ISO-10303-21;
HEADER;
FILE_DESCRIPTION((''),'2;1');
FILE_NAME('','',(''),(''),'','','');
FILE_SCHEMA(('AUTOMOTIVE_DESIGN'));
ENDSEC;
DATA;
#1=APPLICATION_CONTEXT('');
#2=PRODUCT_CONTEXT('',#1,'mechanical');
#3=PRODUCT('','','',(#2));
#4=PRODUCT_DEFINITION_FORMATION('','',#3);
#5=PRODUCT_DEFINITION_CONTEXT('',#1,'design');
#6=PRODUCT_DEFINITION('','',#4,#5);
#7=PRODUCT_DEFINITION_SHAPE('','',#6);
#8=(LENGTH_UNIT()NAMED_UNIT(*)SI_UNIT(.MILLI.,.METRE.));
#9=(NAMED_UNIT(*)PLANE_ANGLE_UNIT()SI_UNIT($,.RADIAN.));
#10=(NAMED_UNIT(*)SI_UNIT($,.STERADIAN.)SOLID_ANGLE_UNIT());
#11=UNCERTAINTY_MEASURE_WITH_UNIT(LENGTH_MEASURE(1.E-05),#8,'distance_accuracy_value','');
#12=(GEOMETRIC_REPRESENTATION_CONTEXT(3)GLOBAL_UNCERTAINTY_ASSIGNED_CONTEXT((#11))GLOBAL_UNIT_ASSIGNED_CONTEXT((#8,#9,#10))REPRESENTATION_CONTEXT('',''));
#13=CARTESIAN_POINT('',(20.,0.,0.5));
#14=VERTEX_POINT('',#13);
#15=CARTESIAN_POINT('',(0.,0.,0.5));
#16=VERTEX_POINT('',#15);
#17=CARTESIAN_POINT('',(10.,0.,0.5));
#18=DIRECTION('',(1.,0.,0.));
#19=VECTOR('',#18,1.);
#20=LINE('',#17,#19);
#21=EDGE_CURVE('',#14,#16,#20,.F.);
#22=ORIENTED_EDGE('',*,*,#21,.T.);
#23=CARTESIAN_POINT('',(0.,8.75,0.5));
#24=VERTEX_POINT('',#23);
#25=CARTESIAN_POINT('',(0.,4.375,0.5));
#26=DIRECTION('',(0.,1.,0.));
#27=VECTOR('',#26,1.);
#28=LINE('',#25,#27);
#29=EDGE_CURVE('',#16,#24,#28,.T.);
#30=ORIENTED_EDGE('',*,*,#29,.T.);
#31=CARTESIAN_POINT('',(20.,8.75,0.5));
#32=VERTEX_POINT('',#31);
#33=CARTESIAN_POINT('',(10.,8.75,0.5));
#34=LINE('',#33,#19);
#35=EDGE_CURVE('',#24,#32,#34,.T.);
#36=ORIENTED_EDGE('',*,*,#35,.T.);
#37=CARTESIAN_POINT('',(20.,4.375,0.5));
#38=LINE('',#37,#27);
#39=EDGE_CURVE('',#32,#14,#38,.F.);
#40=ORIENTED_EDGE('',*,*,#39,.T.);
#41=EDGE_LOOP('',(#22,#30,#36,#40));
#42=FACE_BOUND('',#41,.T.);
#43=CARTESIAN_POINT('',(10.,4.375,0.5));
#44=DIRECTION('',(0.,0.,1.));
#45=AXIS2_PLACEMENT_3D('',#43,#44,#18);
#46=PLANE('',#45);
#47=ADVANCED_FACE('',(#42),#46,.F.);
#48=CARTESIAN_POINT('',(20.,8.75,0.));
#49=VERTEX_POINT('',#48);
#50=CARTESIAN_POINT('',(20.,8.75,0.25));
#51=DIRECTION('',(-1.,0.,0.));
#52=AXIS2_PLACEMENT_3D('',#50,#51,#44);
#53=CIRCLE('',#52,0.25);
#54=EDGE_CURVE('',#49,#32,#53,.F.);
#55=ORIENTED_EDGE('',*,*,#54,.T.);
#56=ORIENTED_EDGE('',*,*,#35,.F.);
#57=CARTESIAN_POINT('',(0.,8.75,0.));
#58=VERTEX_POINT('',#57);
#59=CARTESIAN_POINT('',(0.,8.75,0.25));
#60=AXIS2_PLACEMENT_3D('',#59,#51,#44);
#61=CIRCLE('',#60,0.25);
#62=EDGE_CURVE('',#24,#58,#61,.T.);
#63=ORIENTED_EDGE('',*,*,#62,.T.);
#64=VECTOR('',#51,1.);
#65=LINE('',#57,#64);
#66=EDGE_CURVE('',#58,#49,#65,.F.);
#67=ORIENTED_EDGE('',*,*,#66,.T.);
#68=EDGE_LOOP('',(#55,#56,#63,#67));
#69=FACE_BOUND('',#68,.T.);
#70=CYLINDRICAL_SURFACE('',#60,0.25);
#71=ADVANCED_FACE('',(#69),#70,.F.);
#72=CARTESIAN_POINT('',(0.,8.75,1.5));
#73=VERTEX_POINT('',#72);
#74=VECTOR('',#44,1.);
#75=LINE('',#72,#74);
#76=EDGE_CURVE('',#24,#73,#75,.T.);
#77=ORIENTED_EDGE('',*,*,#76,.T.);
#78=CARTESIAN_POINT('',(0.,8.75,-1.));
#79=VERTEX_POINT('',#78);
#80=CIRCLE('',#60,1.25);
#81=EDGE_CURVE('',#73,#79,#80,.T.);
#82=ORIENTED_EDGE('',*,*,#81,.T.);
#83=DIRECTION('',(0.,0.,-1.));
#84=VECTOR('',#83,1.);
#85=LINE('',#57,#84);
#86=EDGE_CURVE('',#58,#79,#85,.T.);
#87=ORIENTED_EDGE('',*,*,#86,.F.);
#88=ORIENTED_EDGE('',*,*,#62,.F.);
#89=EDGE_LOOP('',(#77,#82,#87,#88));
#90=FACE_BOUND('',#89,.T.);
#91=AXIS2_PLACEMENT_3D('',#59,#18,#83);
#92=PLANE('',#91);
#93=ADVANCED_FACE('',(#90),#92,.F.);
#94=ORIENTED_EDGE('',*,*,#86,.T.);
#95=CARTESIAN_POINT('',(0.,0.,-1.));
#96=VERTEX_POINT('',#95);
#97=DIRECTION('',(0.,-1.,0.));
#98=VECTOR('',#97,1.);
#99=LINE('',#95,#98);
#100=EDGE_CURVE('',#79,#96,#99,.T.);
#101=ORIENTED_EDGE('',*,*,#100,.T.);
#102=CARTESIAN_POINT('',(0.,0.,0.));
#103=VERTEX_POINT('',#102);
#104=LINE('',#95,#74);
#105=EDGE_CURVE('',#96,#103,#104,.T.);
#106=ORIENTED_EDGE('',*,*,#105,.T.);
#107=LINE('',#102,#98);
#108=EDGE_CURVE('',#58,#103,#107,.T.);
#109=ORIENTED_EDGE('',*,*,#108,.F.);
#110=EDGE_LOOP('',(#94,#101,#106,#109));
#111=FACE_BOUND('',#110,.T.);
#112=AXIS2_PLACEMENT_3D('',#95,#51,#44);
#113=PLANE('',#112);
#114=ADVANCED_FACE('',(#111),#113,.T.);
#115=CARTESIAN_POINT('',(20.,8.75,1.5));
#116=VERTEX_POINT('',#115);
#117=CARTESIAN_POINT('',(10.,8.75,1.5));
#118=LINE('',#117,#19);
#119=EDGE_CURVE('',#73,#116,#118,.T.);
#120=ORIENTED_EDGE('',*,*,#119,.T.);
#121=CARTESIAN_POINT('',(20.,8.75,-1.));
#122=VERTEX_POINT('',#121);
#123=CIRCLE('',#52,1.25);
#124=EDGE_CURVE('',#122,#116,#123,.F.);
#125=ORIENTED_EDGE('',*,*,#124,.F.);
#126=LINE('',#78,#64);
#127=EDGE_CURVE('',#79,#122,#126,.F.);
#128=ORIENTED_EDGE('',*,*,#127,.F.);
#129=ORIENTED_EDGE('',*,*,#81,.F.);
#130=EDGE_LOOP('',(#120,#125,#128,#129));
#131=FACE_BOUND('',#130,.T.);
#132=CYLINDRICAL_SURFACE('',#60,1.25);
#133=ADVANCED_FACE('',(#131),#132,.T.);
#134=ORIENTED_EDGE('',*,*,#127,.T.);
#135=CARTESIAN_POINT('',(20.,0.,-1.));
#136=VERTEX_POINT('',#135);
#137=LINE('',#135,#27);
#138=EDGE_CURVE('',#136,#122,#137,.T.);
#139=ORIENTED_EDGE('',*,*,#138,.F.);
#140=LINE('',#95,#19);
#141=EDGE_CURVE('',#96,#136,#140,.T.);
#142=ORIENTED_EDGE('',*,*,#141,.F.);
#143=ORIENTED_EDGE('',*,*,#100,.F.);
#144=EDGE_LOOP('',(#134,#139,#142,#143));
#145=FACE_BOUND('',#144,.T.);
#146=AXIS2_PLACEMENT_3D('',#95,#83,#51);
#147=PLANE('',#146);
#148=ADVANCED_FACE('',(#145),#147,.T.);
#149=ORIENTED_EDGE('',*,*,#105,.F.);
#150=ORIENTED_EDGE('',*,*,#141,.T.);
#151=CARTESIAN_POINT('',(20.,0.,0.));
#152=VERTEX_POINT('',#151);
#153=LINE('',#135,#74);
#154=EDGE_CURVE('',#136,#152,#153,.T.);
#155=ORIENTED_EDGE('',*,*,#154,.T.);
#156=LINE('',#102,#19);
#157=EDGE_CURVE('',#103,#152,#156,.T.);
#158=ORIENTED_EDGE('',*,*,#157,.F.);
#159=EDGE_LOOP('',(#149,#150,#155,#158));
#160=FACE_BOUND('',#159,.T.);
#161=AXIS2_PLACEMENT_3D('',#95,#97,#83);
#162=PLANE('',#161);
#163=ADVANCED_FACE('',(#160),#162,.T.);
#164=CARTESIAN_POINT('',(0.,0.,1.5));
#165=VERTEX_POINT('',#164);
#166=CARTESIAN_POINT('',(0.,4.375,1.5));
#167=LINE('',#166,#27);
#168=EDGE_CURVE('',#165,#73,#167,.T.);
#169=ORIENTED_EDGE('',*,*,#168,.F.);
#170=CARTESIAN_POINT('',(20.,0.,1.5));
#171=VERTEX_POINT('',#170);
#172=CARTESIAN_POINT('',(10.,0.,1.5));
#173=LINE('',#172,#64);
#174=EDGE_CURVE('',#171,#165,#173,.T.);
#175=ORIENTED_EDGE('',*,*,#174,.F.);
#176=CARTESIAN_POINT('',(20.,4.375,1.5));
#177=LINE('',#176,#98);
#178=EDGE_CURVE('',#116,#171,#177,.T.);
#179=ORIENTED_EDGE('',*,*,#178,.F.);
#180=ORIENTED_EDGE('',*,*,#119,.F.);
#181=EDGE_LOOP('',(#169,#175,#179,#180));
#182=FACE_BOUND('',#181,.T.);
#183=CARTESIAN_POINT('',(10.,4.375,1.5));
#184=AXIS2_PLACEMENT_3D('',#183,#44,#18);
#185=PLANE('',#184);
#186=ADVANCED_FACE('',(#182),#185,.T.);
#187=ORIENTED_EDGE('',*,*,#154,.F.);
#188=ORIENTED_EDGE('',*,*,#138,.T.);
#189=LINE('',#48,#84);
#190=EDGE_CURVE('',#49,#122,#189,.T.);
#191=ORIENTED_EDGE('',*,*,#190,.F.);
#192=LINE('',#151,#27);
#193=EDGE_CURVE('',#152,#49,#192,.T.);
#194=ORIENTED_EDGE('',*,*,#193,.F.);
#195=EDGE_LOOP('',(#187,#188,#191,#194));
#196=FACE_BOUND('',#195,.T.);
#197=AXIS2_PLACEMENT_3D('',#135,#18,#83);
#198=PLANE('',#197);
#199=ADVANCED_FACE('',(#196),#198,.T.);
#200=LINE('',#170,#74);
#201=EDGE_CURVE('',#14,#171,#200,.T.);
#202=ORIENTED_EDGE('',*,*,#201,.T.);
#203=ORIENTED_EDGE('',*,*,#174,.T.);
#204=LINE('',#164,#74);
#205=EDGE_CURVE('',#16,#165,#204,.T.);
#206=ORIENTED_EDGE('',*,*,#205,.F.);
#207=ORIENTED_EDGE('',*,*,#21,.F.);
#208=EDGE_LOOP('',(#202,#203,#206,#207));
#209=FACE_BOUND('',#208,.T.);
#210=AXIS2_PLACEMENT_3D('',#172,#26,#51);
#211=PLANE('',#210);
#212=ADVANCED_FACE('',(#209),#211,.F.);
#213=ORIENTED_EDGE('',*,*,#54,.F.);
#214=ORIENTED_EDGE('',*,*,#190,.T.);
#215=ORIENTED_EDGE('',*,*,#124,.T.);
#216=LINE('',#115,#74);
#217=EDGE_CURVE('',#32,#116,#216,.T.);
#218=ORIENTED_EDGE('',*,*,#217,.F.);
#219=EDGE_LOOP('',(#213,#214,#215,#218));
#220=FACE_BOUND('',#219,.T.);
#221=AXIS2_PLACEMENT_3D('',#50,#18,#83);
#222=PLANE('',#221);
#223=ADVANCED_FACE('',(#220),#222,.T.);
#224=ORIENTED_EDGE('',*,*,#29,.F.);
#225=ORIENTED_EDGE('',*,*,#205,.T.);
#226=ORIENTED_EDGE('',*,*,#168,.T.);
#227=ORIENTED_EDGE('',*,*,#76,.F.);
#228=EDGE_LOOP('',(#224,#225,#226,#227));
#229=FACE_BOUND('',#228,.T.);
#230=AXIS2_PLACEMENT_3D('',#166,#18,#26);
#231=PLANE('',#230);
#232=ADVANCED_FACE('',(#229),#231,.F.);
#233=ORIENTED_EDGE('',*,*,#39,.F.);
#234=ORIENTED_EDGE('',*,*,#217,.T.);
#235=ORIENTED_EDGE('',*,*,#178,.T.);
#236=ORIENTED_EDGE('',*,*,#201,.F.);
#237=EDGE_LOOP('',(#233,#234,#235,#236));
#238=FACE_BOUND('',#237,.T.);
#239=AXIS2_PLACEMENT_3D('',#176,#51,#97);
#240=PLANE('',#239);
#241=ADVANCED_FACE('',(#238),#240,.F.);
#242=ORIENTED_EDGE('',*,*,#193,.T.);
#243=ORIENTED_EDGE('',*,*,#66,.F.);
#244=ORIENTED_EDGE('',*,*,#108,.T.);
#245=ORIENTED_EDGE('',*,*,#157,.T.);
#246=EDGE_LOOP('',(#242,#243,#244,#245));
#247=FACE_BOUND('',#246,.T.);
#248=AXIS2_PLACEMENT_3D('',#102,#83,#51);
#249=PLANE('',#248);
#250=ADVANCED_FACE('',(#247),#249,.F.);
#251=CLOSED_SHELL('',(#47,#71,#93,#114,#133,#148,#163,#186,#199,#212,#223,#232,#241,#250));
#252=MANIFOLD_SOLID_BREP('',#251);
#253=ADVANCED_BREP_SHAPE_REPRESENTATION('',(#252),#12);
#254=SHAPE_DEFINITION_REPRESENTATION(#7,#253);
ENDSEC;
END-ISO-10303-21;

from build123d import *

# Parameters (mm, degrees)
SKETCH_1_W       = 20
SKETCH_1_H       = 10
BASEPLATE_DEPTH  = 1
HEM_OPEN_DEPTH   = 20
HEM_OPEN_2_DEPTH = 20


# Read off the part's stored shape, not the designer's step: Hem_open
# Sheet-metal steps are written as plain solids
with BuildPart() as part:
    # Sketch 1 → BasePlate (new body)
    with BuildSketch(Plane.XY):
        with Locations((10, 5)):
            Rectangle(SKETCH_1_W, SKETCH_1_H)
    extrude(amount=-BASEPLATE_DEPTH)

    # Hem_open outline → Hem_open (cut)
    with BuildSketch(Plane.YZ):
        with BuildLine():
            Line((10, 0), (9.974744871, 0))
            ThreePointArc((9.974744871, 0), (9.540569415, -0.718245837), (8.75, -1))
            Line((8.75, -1), (10, -1))
            Line((10, -1), (10, 0))
        make_face()
    extrude(amount=HEM_OPEN_DEPTH, mode=Mode.SUBTRACT)

    # Hem_open 2 outline → Hem_open 2 (add)
    with BuildSketch(Plane.YZ):
        with BuildLine():
            Line((0, 1.5), (0, 0.5))
            Line((0, 0.5), (8.75, 0.5))
            ThreePointArc((8.75, 0.5), (9, 0.25), (8.75, 0))
            Line((8.75, 0), (9.974744871, 0))
            ThreePointArc((9.974744871, 0), (9.718245837, 1.040569415), (8.75, 1.5))
            Line((8.75, 1.5), (0, 1.5))
        make_face()
    extrude(amount=HEM_OPEN_2_DEPTH)


solid = part.part
